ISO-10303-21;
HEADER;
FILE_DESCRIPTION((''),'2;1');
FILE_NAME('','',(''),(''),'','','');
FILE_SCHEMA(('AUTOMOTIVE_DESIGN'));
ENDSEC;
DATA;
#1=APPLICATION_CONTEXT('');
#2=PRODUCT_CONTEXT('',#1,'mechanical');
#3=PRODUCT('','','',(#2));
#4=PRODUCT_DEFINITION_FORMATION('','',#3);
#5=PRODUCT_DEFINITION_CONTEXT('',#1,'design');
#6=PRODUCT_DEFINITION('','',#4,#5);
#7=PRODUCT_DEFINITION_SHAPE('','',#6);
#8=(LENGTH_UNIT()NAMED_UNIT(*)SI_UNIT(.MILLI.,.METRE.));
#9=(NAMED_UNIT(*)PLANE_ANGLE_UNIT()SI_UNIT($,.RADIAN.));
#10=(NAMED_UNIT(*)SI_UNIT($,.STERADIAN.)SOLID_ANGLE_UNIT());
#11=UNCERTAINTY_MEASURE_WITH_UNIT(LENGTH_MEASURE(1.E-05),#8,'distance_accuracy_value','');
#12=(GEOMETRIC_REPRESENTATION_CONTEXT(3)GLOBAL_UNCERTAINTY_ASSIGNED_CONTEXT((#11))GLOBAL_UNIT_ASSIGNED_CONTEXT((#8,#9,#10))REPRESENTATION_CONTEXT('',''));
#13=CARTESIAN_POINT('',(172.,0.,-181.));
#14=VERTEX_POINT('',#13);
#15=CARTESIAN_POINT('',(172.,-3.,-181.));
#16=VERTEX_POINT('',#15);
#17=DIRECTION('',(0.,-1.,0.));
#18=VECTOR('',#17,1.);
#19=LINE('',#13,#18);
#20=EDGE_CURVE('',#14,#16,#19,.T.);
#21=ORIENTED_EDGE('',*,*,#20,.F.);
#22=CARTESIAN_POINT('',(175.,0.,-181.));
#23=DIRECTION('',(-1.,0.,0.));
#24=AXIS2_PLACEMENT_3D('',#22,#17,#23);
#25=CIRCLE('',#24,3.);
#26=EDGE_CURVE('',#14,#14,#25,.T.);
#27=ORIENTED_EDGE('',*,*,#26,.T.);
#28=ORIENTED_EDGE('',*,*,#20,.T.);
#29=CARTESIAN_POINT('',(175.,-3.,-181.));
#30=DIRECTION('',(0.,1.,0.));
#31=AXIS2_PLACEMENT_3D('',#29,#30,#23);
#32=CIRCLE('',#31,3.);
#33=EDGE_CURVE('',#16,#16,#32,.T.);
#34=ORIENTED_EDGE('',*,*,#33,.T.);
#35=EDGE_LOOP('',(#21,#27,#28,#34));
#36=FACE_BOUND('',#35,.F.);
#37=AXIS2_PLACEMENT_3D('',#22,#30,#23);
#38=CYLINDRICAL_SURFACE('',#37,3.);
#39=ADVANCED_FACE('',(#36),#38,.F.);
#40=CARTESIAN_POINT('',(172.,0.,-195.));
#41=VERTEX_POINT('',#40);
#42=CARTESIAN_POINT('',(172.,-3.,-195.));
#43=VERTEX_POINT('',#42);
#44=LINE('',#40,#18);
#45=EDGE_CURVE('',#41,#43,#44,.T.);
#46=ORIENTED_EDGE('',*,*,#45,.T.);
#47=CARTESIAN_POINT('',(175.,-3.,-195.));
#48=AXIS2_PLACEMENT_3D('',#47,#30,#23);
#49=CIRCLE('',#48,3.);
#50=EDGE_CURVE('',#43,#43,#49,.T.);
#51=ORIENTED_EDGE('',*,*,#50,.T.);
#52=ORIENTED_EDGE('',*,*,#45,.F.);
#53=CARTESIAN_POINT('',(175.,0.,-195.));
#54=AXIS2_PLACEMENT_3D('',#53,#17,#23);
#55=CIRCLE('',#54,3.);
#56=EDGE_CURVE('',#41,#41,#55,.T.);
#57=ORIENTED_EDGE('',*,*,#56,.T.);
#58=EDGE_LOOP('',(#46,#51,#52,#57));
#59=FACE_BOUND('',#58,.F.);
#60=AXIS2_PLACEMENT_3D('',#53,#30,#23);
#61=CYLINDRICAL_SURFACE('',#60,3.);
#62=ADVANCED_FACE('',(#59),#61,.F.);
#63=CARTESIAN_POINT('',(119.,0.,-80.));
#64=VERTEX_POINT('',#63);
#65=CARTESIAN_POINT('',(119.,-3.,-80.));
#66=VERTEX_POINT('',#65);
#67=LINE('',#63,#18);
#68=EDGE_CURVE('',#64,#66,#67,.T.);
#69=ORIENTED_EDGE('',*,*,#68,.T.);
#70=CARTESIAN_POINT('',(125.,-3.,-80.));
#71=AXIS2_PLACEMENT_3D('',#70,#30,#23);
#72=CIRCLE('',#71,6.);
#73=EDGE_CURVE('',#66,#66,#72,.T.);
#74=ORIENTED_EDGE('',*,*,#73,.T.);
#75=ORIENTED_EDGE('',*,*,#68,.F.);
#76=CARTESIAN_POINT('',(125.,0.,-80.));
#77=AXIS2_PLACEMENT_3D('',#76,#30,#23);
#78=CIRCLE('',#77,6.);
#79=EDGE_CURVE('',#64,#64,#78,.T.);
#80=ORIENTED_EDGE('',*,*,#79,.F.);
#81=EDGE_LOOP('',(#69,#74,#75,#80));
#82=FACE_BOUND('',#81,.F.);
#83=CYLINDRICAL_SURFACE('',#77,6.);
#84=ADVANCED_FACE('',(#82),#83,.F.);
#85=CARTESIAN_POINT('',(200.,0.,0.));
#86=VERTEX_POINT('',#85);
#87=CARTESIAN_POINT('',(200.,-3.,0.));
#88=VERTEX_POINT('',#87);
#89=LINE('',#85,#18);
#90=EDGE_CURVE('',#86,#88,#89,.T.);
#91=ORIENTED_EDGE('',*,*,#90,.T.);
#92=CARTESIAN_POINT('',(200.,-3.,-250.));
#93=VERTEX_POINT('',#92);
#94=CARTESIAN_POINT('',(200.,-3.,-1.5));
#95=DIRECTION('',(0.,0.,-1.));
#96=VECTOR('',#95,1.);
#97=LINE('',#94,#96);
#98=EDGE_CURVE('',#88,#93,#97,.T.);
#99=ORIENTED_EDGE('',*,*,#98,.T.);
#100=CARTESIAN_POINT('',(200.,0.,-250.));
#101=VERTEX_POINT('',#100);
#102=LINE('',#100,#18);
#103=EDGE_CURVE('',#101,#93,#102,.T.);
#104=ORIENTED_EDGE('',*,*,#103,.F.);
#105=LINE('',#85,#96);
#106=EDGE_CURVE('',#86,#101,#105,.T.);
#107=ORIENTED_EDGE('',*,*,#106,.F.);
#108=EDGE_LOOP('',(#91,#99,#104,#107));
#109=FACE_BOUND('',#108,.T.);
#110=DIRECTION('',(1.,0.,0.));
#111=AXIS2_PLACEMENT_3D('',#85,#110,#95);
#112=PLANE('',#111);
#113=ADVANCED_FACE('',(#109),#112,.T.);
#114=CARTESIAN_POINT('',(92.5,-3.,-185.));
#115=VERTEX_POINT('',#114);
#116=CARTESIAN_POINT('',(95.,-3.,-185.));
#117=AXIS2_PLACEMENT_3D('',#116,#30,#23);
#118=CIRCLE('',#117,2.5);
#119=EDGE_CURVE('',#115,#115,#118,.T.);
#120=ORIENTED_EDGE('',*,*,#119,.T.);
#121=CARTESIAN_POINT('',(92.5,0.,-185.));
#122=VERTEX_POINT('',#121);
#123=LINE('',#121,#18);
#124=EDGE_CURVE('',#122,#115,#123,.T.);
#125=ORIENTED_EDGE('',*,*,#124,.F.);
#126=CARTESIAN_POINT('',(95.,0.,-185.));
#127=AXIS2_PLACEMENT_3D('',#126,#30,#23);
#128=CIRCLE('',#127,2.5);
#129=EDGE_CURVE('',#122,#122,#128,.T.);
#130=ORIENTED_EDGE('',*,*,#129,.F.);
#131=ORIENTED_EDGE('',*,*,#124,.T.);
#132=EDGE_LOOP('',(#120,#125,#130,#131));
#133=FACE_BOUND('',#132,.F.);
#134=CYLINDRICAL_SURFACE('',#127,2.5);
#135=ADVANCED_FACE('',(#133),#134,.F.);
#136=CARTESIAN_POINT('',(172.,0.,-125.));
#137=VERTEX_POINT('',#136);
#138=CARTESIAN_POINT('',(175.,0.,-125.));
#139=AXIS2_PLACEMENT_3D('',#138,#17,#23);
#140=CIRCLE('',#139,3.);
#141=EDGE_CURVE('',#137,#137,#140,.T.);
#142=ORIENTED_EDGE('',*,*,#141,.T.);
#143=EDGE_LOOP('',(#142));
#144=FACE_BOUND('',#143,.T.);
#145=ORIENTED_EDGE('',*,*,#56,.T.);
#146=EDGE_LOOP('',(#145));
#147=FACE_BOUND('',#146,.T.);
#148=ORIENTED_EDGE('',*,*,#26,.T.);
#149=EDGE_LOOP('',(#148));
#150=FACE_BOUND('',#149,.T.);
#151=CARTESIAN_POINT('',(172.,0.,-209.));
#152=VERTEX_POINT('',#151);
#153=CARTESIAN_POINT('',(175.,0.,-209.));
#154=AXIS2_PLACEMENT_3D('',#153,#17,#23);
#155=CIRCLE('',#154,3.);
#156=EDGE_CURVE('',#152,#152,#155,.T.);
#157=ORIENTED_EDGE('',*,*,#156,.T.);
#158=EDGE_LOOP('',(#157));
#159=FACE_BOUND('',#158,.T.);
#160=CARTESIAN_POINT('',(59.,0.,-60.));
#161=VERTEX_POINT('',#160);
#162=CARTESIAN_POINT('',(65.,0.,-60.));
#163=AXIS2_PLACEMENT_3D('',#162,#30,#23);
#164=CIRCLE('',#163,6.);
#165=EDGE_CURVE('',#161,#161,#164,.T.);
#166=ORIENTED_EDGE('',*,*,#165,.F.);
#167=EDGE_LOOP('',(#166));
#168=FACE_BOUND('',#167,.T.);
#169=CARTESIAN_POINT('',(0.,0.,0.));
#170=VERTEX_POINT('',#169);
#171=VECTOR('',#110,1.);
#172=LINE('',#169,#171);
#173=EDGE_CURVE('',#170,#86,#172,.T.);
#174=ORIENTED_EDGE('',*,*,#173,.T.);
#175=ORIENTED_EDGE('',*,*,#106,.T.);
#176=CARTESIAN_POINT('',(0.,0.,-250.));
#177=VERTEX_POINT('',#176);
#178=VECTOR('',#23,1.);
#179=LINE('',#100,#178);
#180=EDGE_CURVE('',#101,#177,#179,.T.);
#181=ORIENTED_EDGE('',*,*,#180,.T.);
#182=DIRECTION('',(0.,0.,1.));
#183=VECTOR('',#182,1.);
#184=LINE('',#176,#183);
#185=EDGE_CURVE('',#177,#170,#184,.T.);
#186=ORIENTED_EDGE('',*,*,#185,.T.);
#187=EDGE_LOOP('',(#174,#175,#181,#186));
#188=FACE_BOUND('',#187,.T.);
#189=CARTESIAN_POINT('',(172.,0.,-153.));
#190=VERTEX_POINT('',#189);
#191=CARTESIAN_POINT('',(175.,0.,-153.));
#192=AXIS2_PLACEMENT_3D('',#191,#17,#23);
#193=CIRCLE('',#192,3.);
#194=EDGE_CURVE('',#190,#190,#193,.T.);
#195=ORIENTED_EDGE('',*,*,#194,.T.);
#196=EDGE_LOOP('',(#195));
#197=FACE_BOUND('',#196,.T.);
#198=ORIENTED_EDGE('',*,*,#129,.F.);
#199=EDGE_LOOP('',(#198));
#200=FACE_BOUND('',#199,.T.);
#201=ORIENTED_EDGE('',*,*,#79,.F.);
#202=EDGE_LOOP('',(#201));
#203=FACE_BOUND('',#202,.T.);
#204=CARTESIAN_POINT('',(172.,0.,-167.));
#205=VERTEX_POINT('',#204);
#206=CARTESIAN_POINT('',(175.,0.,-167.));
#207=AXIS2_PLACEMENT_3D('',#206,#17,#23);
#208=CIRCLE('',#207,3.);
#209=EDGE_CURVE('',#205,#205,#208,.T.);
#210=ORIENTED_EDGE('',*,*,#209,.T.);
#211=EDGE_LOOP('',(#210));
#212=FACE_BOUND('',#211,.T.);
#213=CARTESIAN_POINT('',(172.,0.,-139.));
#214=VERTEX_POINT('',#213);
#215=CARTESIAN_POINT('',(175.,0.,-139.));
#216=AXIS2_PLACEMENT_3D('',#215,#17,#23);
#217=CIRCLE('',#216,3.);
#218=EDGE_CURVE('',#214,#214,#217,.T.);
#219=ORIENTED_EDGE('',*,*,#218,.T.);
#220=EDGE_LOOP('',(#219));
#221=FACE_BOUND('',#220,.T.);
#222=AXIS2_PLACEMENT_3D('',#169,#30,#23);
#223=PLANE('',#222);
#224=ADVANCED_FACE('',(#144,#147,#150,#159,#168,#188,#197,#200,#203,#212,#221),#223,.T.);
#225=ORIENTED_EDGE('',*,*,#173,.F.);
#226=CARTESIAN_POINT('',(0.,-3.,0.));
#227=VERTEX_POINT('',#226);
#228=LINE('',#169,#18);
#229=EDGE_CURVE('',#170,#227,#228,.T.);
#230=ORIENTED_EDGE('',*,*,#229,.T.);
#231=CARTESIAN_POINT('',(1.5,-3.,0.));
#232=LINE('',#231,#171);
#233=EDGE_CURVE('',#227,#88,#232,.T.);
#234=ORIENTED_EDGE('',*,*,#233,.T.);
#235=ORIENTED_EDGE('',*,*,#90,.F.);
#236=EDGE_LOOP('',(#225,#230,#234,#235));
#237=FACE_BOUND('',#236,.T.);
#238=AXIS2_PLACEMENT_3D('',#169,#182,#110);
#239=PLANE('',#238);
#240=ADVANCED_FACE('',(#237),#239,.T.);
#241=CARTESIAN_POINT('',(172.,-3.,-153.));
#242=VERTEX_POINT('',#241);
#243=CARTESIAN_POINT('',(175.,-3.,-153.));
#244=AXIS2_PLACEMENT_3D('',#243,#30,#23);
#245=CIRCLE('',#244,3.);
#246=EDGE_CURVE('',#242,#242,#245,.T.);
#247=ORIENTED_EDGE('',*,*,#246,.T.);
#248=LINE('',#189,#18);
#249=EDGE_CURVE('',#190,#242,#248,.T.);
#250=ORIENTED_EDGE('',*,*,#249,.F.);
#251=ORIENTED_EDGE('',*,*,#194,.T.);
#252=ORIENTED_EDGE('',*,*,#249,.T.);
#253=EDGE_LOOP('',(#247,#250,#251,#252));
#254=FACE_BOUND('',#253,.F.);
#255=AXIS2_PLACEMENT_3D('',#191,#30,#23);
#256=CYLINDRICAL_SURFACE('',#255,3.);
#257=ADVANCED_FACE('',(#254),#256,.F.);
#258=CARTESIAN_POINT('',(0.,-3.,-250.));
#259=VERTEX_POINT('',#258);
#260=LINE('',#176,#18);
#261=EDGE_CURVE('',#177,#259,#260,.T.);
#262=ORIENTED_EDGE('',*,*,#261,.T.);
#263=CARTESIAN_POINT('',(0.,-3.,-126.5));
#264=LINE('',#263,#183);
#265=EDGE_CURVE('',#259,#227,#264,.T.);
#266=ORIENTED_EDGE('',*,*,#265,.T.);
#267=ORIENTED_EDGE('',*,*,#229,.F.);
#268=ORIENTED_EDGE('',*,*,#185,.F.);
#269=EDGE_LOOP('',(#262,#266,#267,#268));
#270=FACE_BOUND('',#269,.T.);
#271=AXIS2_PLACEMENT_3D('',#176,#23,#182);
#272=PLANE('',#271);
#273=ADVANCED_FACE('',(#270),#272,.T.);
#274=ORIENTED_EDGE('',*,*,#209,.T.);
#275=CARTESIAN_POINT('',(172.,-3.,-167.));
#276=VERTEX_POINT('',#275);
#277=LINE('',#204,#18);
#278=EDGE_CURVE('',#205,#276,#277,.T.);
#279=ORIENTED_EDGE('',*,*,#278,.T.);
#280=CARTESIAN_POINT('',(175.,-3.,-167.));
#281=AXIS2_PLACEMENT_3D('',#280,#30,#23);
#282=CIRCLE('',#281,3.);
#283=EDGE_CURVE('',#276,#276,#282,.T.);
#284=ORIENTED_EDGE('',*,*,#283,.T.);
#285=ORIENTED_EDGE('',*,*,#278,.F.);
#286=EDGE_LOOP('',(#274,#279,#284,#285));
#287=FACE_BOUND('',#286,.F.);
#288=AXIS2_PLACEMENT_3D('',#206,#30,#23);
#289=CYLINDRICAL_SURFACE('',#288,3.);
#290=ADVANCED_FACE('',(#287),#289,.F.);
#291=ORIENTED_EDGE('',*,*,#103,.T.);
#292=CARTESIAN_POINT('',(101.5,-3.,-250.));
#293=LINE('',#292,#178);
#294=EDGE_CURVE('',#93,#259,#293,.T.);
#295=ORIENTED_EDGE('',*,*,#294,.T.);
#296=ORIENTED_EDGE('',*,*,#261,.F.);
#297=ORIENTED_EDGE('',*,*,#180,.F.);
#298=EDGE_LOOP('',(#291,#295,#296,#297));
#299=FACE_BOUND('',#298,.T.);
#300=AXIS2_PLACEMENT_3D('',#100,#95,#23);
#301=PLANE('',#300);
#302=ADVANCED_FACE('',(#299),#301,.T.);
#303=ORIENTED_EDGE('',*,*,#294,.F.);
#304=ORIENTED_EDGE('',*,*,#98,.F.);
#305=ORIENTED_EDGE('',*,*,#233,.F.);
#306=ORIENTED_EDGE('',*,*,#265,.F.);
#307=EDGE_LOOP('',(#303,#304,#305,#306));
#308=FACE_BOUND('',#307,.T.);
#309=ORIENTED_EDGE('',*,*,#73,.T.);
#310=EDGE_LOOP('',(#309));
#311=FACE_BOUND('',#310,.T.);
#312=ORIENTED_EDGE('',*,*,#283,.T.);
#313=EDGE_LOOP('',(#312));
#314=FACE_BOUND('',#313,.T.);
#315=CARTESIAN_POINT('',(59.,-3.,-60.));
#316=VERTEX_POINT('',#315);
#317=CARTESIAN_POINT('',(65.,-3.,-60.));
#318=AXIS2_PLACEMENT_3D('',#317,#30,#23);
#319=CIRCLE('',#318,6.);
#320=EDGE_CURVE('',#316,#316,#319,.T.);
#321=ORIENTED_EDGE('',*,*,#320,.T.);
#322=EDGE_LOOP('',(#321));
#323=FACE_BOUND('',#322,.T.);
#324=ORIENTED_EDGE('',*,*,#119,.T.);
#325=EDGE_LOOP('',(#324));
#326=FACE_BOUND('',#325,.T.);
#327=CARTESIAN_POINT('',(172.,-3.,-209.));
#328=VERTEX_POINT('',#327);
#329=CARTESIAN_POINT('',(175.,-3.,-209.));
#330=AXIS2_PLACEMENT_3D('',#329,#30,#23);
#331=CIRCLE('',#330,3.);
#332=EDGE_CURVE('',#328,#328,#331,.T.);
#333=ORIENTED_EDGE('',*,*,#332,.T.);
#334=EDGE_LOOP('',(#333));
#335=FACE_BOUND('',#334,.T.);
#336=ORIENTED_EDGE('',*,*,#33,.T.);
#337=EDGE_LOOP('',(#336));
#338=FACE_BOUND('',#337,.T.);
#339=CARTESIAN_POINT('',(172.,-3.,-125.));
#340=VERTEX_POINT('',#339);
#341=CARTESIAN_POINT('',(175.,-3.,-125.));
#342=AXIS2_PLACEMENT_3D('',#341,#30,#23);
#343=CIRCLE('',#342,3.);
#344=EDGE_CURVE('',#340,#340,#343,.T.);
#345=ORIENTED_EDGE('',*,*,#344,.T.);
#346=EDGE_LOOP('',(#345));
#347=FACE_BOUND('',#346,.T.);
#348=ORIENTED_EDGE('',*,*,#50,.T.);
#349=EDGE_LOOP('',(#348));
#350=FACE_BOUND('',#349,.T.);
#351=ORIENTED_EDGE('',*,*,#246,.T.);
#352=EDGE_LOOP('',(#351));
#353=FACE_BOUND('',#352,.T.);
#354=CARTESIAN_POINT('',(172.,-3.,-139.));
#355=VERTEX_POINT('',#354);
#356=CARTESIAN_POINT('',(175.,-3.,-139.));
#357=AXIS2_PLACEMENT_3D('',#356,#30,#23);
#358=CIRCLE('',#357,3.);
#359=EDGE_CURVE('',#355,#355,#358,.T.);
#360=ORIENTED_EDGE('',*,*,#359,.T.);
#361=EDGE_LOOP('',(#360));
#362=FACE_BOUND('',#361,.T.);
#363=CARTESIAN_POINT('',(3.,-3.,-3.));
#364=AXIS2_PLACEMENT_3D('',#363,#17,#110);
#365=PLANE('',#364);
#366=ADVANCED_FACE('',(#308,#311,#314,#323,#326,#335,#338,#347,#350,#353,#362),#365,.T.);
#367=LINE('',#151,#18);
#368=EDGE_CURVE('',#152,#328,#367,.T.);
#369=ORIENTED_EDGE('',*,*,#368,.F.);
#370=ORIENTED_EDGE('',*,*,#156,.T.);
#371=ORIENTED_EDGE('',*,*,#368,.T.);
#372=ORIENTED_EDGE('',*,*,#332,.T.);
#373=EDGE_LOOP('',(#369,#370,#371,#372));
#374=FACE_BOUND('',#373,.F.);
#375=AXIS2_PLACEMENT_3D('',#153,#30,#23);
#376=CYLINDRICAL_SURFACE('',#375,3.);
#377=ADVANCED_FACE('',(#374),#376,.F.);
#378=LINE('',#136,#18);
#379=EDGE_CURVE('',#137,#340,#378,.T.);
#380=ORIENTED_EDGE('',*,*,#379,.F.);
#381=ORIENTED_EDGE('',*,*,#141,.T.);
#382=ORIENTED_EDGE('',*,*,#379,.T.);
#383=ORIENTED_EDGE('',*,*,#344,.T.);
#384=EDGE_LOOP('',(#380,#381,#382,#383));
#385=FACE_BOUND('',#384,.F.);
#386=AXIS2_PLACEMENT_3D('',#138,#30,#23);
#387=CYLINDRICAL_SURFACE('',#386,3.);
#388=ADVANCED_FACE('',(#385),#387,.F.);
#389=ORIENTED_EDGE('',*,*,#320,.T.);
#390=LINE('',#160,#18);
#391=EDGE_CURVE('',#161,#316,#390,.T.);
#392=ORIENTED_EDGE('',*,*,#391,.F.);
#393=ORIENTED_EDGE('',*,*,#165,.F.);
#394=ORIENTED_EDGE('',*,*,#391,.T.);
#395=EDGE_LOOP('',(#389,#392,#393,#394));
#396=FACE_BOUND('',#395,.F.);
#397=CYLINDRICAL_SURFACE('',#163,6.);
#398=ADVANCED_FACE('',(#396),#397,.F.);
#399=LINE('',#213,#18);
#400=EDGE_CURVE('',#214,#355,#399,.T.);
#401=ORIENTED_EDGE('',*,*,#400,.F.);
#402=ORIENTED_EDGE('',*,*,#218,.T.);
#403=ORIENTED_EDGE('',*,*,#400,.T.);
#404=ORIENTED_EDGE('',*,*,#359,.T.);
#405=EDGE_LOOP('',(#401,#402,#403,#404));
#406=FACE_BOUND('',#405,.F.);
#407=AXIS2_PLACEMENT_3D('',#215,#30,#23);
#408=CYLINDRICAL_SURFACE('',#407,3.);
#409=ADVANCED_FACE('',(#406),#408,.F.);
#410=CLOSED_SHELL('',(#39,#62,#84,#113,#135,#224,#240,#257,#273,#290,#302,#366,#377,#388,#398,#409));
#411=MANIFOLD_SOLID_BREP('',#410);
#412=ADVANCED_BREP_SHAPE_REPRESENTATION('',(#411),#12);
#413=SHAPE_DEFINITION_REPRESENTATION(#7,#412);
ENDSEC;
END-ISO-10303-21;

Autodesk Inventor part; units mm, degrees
ref_plane "YZ Plane" through (0, 0, 0) normal (1, 0, 0) x (0, 1, 0)
ref_plane "XZ Plane" through (0, 0, 0) normal (0, 1, 0) x (-1, 0, 0)
ref_plane "XY Plane" through (0, 0, 0) normal (0, 0, 1) x (1, 0, 0)
sketch "block" plane through (0, 0, 0) normal (0, 1, 0) x (-1, 0, 0)
  line L0 (0, 0) -> (-200, 0)
  line L1 (-200, 0) -> (-200, -250)
  line L2 (-200, -250) -> (0, -250)
  line L3 (0, -250) -> (0, 0)
  dimension "d31" = 200
  dimension "d32" = 250
extrude "ext_block" add sketch "block" against normal blind 24
shell "Shell2" thickness 3 removed faces 0
sketch "lines_base" plane through (0, 0, 0) normal (0, 1, 0) x (-1, 0, 0)
  line L0 (0, 0) -> (-200, 0)
  line L1 (-200, 0) -> (-200, -250)
  line L2 (-200, -250) -> (0, -250)
  line L3 (0, -250) -> (0, 0)
  circle A0 centre (-65, -60) radius 6
  circle A1 centre (-125, -80) radius 6
  circle A2 centre (-65, -60) radius 12.5
  circle A3 centre (-65, -60) radius 8.5
  circle A4 centre (-125, -80) radius 8.5
  circle A5 centre (-125, -80) radius 12.5
  circle A6 centre (-175, -125) radius 3
  line L4 (-175, -125) -> (-175, -209)
  line L5 (-175, -125) -> (-91, -125) construction
  circle A7 centre (-175, -139) radius 3
  circle A8 centre (-175, -153) radius 3
  circle A9 centre (-175, -167) radius 3
  circle A10 centre (-175, -181) radius 3
  circle A11 centre (-175, -195) radius 3
  circle A12 centre (-175, -209) radius 3
  circle A13 centre (-95, -185) radius 2.5
  circle A14 centre (-95, -185) radius 5
  point P0 (-200, -125)
  dimension "d0" = 200
  dimension "d1" = 250
  dimension "d2" = 12
  dimension "d3" = 12
  dimension "d4" = 25
  dimension "d5" = 17
  dimension "d6" = 17
  dimension "d7" = 25
  dimension "d8" = 75
  dimension "d9" = 80
  dimension "d10" = 65
  dimension "d11" = 60
  dimension "d12" = 6
  dimension "d13" = 84
  dimension "d14" = 90
  dimension "d15" = 25
  dimension "d16" = 125
  dimension "d19" = 14
  dimension "d24" = 5
  dimension "d25" = 10
  dimension "d26" = 65
  dimension "d27" = 95
extrude "holes" cut sketch "lines_base" against normal up to surface (3 mm away) contours A0 | A1 | A6 | A7 L4 | L4 A7 | A8 L4 | L4 A8 | A9 L4 | L4 A9 | A10 L4 | L4 A10 | A11 L4 | L4 A11 | A12 | A13
sketch "Sketch4" plane through (200, 0, -250) normal (0, 0, -1) x (-1, 0, 0)
  line L0 (188, -4) -> (169, -4)
  line L1 (169, -4) -> (169, -17)
  line L2 (169, -17) -> (188, -17)
  line L3 (188, -17) -> (188, -4)
  line L4 (0, 0) -> (200, 0) projected
  line L5 (200, 0) -> (200, -24) projected
  dimension "d40" = 19
  dimension "d41" = 13
  dimension "d42" = 4
  dimension "d43" = 12
extrude "pwr_button_hole" cut sketch "Sketch4" against normal up to surface (3 mm away)
ref_plane "Work Plane1" through (7, -21, -243) normal (0, 1, 0) x (1, 0, 0)
sketch "Sketch5" plane through (7, -21, -243) normal (0, 1, 0) x (1, 0, 0)
  line L0 (-20.9366, 21.7948) -> (229.9216, 21.7948)
  line L1 (229.9216, 21.7948) -> (229.9216, -260.9184)
  line L2 (229.9216, -260.9184) -> (-20.9366, -260.9184)
  line L3 (-20.9366, -260.9184) -> (-20.9366, 21.7948)
  point P0 (-7, -243)
extrude "back_cover_cut" cut sketch "Sketch5" against normal through all
sketch "Sketch10" plane through (3, -3, -3) normal (0, -1, 0) x (1, 0, 0)
  line L0 (213.1188, 33.5044) -> (-22.0421, 33.5044)
  line L1 (-22.0421, 33.5044) -> (-22.0421, -278.1947)
  line L2 (-22.0421, -278.1947) -> (213.1188, -278.1947)
  line L3 (213.1188, -278.1947) -> (213.1188, 33.5044)
  point P0 (-3, 3)
extrude "Extrusion8" cut sketch "Sketch10" along normal through all
properties part number "back_top" material "Glass"
